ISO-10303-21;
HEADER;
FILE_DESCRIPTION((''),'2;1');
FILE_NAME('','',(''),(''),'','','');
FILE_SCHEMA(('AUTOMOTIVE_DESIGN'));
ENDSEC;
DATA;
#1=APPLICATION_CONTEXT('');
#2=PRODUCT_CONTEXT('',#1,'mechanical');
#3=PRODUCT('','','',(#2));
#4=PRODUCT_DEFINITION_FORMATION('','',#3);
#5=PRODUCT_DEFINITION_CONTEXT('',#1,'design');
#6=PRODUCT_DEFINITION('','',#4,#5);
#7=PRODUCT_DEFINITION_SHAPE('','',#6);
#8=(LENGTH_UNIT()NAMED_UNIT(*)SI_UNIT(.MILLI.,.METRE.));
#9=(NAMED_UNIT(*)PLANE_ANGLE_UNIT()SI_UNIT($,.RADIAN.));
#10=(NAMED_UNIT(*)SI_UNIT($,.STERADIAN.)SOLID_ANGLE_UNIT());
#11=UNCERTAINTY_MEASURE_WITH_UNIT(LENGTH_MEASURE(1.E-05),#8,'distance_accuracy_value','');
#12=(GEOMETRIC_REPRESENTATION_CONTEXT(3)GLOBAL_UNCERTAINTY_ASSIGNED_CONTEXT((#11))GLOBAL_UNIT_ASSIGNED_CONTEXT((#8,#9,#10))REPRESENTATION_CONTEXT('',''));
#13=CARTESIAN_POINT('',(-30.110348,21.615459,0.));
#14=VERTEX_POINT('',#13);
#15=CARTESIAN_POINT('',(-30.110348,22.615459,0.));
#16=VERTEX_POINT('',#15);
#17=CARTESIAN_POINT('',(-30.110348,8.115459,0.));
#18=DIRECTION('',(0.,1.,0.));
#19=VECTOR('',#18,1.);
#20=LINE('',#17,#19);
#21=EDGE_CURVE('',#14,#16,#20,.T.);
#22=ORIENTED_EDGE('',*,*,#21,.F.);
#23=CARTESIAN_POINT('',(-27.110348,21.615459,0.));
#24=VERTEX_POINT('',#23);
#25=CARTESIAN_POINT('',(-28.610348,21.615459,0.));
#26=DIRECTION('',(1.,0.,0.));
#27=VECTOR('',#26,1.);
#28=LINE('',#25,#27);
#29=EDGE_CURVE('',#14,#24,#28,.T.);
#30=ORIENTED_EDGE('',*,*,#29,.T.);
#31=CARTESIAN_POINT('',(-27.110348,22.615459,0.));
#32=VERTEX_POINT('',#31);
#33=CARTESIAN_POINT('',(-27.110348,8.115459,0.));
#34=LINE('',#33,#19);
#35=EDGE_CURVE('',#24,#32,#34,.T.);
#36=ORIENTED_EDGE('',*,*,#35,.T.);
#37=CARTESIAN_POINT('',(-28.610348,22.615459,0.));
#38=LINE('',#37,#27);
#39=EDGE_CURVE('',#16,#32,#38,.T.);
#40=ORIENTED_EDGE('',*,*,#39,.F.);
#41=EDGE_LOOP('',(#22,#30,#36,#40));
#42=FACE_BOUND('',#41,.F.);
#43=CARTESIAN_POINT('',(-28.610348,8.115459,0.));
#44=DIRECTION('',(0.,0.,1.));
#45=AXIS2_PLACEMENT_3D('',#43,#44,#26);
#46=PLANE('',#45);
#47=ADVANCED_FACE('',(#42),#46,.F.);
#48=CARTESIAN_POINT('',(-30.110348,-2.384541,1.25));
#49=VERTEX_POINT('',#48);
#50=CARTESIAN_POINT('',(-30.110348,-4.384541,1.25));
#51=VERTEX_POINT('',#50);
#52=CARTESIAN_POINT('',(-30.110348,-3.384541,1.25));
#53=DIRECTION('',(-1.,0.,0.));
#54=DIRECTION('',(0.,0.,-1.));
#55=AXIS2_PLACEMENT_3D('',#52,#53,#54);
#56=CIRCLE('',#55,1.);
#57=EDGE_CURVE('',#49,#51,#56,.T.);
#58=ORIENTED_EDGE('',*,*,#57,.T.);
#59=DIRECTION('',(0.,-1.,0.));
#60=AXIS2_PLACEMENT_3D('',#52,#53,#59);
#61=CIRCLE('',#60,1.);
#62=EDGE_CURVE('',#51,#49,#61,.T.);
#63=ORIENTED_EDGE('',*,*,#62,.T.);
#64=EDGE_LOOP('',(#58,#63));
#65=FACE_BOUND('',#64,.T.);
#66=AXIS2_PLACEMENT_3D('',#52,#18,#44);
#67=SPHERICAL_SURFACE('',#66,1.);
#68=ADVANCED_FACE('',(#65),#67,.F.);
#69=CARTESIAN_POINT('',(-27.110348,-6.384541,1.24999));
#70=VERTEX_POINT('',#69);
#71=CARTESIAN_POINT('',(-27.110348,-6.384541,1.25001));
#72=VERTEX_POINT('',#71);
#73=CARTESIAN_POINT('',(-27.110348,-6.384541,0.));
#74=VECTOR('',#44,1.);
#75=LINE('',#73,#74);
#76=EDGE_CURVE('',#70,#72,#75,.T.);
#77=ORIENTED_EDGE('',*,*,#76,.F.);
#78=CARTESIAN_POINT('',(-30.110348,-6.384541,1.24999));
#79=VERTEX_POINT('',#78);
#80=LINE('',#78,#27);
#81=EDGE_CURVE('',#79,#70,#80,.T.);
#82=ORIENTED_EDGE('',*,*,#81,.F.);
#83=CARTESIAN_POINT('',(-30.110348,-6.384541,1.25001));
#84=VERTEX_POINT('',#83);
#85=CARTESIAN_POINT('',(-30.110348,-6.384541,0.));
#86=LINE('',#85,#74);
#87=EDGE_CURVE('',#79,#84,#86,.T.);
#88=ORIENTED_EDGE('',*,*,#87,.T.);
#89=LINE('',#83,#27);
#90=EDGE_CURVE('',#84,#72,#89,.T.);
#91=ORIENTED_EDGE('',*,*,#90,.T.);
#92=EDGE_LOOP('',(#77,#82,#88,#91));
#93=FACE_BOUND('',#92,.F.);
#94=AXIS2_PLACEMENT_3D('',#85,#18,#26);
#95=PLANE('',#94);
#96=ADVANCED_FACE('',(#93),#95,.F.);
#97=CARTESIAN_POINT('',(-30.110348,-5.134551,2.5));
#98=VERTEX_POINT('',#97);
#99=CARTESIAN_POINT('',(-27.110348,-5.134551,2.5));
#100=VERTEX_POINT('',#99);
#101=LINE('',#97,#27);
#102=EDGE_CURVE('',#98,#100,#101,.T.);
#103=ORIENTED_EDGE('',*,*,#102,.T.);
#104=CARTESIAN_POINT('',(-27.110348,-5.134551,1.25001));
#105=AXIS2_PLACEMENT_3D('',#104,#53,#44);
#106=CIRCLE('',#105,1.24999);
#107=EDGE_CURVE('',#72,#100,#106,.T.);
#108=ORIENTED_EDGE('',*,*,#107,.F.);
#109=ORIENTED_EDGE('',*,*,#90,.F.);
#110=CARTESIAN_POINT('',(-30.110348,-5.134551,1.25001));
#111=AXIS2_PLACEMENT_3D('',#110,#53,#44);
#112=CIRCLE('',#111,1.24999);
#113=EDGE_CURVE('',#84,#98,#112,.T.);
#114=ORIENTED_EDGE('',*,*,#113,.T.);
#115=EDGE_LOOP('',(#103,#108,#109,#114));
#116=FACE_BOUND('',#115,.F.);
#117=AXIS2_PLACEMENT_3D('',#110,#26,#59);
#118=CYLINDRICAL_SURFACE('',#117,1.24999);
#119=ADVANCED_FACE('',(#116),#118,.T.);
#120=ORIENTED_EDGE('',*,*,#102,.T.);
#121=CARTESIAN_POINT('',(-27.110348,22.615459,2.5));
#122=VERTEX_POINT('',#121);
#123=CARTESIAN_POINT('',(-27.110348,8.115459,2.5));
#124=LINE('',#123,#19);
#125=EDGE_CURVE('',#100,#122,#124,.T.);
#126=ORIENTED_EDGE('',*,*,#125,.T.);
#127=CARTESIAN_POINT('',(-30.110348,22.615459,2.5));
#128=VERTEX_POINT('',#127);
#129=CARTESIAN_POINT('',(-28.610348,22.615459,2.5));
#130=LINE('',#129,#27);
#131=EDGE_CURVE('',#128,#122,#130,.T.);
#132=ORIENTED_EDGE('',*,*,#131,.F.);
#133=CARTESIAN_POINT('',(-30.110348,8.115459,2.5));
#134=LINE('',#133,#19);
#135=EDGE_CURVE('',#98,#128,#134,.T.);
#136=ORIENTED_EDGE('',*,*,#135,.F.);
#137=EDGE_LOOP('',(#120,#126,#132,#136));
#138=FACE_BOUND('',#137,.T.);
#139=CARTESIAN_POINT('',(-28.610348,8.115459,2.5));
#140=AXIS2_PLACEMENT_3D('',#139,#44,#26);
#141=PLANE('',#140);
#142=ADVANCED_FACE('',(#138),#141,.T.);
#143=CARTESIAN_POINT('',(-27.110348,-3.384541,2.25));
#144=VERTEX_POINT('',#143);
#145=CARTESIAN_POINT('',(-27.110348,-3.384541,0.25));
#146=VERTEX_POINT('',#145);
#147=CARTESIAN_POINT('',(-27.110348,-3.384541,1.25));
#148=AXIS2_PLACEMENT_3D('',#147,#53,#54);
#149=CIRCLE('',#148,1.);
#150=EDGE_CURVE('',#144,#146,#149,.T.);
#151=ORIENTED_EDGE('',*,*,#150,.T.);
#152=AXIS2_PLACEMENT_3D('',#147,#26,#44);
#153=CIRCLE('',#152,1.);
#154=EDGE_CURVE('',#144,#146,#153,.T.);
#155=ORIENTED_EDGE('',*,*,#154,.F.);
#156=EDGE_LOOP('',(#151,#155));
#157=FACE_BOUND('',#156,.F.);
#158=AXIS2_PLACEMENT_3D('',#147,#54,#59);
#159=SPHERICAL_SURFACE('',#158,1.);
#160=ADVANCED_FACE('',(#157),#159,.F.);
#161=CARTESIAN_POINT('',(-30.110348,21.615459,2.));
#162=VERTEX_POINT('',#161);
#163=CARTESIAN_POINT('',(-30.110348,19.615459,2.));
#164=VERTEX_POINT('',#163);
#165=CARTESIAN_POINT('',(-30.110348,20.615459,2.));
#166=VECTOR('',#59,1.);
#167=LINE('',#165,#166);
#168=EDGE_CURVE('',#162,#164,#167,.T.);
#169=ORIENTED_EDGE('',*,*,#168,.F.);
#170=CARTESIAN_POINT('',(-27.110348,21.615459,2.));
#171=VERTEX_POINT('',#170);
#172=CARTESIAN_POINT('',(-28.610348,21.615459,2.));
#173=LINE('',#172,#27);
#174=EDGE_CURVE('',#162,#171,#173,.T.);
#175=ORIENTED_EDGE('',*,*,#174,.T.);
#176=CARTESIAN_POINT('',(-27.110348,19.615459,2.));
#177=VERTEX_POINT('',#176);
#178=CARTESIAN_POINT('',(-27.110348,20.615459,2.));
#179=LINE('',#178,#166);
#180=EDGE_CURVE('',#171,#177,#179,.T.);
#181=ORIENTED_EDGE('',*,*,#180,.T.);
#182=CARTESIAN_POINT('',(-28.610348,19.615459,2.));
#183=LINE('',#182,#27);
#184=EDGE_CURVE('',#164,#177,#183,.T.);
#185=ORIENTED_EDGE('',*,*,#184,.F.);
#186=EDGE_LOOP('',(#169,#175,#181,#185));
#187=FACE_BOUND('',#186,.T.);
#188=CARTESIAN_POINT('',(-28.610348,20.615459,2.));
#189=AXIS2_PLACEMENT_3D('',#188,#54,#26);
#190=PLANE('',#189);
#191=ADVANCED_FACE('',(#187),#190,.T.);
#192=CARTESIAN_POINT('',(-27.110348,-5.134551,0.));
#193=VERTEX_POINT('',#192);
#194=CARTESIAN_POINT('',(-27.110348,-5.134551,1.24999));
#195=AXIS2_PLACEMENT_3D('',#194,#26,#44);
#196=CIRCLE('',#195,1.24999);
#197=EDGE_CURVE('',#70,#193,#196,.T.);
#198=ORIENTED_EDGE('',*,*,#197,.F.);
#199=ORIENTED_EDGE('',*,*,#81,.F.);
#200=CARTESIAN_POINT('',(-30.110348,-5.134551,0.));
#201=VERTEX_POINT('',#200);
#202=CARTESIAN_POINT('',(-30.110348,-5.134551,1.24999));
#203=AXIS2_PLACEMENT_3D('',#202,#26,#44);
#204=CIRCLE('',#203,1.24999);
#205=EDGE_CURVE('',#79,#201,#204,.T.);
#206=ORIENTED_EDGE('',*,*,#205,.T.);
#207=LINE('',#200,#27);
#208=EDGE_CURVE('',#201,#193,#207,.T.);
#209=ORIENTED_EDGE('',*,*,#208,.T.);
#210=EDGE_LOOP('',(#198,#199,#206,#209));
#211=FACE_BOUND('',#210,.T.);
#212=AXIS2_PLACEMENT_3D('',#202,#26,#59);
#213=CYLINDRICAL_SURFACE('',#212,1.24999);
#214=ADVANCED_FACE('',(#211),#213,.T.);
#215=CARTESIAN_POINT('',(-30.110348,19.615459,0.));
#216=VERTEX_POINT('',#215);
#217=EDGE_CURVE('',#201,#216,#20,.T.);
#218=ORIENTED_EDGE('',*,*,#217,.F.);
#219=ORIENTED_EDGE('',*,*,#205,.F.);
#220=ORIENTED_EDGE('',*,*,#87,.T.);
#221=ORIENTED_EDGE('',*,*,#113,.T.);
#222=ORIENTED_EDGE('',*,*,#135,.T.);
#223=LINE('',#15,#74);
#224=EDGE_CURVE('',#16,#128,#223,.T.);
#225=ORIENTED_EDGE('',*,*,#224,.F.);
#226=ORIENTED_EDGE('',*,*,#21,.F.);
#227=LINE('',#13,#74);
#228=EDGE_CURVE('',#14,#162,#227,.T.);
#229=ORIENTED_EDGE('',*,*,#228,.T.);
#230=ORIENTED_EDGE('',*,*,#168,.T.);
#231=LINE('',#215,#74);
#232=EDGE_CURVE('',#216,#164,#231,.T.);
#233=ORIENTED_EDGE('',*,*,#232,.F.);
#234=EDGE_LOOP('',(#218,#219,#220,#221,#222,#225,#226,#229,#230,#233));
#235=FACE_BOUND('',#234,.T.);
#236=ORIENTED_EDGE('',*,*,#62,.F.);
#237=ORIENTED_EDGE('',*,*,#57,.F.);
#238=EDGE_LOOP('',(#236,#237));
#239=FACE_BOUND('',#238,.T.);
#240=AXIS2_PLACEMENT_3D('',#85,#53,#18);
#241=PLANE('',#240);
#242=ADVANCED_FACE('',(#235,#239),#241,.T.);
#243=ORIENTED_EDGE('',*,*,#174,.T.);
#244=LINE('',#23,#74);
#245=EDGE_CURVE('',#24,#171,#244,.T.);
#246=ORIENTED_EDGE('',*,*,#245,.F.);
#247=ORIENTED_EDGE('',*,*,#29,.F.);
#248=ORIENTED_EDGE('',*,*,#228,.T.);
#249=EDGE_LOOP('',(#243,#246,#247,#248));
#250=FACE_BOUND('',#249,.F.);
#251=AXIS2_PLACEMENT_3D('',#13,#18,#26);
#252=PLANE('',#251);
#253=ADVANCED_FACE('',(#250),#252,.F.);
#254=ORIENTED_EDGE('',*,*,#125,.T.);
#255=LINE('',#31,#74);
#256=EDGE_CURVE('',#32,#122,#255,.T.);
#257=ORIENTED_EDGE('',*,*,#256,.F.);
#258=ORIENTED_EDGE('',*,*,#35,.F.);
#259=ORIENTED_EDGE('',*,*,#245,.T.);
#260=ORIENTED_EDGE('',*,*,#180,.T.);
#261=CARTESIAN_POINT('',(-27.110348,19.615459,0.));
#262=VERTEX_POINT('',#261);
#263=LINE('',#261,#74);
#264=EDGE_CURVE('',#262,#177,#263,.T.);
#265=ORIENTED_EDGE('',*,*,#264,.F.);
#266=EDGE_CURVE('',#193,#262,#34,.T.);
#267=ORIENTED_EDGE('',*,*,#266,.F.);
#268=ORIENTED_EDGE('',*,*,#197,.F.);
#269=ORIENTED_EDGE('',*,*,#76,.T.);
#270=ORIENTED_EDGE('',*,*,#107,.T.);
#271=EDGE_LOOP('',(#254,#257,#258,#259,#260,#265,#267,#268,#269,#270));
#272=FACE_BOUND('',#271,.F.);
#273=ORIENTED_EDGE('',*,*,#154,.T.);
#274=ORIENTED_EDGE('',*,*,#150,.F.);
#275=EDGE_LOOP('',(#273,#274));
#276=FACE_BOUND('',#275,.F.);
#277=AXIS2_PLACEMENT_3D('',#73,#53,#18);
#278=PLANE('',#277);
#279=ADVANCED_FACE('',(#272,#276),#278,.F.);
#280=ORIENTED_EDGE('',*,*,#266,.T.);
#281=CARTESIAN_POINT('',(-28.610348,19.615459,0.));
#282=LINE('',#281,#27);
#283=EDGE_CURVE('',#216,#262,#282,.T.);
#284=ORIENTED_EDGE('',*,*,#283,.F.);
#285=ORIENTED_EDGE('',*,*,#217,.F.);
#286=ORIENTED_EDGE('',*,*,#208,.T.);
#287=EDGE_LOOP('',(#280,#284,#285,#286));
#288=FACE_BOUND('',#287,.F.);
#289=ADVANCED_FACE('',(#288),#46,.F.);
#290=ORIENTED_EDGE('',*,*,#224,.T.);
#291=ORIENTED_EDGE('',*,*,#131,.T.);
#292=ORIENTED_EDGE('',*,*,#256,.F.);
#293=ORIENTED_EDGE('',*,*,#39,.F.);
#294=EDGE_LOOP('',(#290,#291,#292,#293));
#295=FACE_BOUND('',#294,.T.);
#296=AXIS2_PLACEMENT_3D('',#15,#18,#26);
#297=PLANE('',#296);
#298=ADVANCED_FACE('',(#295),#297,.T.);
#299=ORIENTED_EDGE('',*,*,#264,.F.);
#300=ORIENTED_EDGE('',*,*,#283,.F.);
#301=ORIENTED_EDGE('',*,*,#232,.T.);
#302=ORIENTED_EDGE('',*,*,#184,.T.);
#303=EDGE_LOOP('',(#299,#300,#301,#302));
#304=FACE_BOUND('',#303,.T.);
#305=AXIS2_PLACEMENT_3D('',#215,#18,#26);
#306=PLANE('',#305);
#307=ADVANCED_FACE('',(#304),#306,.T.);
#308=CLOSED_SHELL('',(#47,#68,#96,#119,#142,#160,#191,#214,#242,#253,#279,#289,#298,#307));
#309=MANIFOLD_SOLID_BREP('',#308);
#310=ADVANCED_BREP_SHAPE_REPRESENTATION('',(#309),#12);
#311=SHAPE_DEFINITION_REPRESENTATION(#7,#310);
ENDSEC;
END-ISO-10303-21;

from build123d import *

# Parameters (mm, degrees)
F0_W     = 3
F0_H     = 29
F1_DEPTH = 2.5
F6_R     = 1.24999
F7_W     = 3
F7_H     = 2
F8_DEPTH = 2


# Not quite as in the source:
# - a fillet or chamfer is up to 0.001 mm smaller than in the source, because OpenCascade refuses the exact size


with BuildPart() as f1:
    # F0 (on Top) → F1 (new body)
    with BuildSketch(Plane.XY):
        with Locations((-28.6103483079, 8.1154592335)):
            Rectangle(F0_W, F0_H)
    extrude(amount=F1_DEPTH)

    # F2 (on face) → F3 (revolve, cut)
    with BuildSketch(Plane.YZ.offset(-27.1103483079)):
        with BuildLine():
            Line((-3.3845407665, 0.25), (-3.3845407665, 2.25))
            ThreePointArc((-3.3845407665, 2.25), (-4.3845407665, 1.25), (-3.3845407665, 0.25))
        make_face()
    revolve(axis=Axis((-27.1103483079, -3.3845407665, 1.25), (0, 0, -1)), mode=Mode.SUBTRACT)

    # F4 (on face) → F5 (revolve, cut)
    with BuildSketch(Plane(origin=(-30.1103483079, 0, 0), x_dir=(0, -1, 0), z_dir=(-1, 0, 0))):
        with BuildLine():
            Line((2.3845407665, 1.25), (4.3845407665, 1.25))
            ThreePointArc((4.3845407665, 1.25), (3.3845407665, 2.25), (2.3845407665, 1.25))
        make_face()
    revolve(axis=Axis((-30.1103483079, -3.3845407665, 1.25), (0, -1, 0)), mode=Mode.SUBTRACT)

    # F6 (radius 1.25 in the source; OpenCascade refuses exactly that, so slightly less here)
    f6_edges = [f1.edges().sort_by_distance(p)[0] for p in [
        (-28.610348, -6.384541, 2.5),
        (-28.610348, -6.384541, 0),
    ]]
    fillet(f6_edges, radius=F6_R)

    # F7 (on face) → F8 (cut)
    with BuildSketch(Plane(origin=(0, 0, 0), x_dir=(1, 0, 0), z_dir=(0, 0, -1))):
        with Locations((-28.6103483079, -20.6154592335)):
            Rectangle(F7_W, F7_H)
    extrude(amount=-F8_DEPTH, mode=Mode.SUBTRACT)


solid = f1.part
